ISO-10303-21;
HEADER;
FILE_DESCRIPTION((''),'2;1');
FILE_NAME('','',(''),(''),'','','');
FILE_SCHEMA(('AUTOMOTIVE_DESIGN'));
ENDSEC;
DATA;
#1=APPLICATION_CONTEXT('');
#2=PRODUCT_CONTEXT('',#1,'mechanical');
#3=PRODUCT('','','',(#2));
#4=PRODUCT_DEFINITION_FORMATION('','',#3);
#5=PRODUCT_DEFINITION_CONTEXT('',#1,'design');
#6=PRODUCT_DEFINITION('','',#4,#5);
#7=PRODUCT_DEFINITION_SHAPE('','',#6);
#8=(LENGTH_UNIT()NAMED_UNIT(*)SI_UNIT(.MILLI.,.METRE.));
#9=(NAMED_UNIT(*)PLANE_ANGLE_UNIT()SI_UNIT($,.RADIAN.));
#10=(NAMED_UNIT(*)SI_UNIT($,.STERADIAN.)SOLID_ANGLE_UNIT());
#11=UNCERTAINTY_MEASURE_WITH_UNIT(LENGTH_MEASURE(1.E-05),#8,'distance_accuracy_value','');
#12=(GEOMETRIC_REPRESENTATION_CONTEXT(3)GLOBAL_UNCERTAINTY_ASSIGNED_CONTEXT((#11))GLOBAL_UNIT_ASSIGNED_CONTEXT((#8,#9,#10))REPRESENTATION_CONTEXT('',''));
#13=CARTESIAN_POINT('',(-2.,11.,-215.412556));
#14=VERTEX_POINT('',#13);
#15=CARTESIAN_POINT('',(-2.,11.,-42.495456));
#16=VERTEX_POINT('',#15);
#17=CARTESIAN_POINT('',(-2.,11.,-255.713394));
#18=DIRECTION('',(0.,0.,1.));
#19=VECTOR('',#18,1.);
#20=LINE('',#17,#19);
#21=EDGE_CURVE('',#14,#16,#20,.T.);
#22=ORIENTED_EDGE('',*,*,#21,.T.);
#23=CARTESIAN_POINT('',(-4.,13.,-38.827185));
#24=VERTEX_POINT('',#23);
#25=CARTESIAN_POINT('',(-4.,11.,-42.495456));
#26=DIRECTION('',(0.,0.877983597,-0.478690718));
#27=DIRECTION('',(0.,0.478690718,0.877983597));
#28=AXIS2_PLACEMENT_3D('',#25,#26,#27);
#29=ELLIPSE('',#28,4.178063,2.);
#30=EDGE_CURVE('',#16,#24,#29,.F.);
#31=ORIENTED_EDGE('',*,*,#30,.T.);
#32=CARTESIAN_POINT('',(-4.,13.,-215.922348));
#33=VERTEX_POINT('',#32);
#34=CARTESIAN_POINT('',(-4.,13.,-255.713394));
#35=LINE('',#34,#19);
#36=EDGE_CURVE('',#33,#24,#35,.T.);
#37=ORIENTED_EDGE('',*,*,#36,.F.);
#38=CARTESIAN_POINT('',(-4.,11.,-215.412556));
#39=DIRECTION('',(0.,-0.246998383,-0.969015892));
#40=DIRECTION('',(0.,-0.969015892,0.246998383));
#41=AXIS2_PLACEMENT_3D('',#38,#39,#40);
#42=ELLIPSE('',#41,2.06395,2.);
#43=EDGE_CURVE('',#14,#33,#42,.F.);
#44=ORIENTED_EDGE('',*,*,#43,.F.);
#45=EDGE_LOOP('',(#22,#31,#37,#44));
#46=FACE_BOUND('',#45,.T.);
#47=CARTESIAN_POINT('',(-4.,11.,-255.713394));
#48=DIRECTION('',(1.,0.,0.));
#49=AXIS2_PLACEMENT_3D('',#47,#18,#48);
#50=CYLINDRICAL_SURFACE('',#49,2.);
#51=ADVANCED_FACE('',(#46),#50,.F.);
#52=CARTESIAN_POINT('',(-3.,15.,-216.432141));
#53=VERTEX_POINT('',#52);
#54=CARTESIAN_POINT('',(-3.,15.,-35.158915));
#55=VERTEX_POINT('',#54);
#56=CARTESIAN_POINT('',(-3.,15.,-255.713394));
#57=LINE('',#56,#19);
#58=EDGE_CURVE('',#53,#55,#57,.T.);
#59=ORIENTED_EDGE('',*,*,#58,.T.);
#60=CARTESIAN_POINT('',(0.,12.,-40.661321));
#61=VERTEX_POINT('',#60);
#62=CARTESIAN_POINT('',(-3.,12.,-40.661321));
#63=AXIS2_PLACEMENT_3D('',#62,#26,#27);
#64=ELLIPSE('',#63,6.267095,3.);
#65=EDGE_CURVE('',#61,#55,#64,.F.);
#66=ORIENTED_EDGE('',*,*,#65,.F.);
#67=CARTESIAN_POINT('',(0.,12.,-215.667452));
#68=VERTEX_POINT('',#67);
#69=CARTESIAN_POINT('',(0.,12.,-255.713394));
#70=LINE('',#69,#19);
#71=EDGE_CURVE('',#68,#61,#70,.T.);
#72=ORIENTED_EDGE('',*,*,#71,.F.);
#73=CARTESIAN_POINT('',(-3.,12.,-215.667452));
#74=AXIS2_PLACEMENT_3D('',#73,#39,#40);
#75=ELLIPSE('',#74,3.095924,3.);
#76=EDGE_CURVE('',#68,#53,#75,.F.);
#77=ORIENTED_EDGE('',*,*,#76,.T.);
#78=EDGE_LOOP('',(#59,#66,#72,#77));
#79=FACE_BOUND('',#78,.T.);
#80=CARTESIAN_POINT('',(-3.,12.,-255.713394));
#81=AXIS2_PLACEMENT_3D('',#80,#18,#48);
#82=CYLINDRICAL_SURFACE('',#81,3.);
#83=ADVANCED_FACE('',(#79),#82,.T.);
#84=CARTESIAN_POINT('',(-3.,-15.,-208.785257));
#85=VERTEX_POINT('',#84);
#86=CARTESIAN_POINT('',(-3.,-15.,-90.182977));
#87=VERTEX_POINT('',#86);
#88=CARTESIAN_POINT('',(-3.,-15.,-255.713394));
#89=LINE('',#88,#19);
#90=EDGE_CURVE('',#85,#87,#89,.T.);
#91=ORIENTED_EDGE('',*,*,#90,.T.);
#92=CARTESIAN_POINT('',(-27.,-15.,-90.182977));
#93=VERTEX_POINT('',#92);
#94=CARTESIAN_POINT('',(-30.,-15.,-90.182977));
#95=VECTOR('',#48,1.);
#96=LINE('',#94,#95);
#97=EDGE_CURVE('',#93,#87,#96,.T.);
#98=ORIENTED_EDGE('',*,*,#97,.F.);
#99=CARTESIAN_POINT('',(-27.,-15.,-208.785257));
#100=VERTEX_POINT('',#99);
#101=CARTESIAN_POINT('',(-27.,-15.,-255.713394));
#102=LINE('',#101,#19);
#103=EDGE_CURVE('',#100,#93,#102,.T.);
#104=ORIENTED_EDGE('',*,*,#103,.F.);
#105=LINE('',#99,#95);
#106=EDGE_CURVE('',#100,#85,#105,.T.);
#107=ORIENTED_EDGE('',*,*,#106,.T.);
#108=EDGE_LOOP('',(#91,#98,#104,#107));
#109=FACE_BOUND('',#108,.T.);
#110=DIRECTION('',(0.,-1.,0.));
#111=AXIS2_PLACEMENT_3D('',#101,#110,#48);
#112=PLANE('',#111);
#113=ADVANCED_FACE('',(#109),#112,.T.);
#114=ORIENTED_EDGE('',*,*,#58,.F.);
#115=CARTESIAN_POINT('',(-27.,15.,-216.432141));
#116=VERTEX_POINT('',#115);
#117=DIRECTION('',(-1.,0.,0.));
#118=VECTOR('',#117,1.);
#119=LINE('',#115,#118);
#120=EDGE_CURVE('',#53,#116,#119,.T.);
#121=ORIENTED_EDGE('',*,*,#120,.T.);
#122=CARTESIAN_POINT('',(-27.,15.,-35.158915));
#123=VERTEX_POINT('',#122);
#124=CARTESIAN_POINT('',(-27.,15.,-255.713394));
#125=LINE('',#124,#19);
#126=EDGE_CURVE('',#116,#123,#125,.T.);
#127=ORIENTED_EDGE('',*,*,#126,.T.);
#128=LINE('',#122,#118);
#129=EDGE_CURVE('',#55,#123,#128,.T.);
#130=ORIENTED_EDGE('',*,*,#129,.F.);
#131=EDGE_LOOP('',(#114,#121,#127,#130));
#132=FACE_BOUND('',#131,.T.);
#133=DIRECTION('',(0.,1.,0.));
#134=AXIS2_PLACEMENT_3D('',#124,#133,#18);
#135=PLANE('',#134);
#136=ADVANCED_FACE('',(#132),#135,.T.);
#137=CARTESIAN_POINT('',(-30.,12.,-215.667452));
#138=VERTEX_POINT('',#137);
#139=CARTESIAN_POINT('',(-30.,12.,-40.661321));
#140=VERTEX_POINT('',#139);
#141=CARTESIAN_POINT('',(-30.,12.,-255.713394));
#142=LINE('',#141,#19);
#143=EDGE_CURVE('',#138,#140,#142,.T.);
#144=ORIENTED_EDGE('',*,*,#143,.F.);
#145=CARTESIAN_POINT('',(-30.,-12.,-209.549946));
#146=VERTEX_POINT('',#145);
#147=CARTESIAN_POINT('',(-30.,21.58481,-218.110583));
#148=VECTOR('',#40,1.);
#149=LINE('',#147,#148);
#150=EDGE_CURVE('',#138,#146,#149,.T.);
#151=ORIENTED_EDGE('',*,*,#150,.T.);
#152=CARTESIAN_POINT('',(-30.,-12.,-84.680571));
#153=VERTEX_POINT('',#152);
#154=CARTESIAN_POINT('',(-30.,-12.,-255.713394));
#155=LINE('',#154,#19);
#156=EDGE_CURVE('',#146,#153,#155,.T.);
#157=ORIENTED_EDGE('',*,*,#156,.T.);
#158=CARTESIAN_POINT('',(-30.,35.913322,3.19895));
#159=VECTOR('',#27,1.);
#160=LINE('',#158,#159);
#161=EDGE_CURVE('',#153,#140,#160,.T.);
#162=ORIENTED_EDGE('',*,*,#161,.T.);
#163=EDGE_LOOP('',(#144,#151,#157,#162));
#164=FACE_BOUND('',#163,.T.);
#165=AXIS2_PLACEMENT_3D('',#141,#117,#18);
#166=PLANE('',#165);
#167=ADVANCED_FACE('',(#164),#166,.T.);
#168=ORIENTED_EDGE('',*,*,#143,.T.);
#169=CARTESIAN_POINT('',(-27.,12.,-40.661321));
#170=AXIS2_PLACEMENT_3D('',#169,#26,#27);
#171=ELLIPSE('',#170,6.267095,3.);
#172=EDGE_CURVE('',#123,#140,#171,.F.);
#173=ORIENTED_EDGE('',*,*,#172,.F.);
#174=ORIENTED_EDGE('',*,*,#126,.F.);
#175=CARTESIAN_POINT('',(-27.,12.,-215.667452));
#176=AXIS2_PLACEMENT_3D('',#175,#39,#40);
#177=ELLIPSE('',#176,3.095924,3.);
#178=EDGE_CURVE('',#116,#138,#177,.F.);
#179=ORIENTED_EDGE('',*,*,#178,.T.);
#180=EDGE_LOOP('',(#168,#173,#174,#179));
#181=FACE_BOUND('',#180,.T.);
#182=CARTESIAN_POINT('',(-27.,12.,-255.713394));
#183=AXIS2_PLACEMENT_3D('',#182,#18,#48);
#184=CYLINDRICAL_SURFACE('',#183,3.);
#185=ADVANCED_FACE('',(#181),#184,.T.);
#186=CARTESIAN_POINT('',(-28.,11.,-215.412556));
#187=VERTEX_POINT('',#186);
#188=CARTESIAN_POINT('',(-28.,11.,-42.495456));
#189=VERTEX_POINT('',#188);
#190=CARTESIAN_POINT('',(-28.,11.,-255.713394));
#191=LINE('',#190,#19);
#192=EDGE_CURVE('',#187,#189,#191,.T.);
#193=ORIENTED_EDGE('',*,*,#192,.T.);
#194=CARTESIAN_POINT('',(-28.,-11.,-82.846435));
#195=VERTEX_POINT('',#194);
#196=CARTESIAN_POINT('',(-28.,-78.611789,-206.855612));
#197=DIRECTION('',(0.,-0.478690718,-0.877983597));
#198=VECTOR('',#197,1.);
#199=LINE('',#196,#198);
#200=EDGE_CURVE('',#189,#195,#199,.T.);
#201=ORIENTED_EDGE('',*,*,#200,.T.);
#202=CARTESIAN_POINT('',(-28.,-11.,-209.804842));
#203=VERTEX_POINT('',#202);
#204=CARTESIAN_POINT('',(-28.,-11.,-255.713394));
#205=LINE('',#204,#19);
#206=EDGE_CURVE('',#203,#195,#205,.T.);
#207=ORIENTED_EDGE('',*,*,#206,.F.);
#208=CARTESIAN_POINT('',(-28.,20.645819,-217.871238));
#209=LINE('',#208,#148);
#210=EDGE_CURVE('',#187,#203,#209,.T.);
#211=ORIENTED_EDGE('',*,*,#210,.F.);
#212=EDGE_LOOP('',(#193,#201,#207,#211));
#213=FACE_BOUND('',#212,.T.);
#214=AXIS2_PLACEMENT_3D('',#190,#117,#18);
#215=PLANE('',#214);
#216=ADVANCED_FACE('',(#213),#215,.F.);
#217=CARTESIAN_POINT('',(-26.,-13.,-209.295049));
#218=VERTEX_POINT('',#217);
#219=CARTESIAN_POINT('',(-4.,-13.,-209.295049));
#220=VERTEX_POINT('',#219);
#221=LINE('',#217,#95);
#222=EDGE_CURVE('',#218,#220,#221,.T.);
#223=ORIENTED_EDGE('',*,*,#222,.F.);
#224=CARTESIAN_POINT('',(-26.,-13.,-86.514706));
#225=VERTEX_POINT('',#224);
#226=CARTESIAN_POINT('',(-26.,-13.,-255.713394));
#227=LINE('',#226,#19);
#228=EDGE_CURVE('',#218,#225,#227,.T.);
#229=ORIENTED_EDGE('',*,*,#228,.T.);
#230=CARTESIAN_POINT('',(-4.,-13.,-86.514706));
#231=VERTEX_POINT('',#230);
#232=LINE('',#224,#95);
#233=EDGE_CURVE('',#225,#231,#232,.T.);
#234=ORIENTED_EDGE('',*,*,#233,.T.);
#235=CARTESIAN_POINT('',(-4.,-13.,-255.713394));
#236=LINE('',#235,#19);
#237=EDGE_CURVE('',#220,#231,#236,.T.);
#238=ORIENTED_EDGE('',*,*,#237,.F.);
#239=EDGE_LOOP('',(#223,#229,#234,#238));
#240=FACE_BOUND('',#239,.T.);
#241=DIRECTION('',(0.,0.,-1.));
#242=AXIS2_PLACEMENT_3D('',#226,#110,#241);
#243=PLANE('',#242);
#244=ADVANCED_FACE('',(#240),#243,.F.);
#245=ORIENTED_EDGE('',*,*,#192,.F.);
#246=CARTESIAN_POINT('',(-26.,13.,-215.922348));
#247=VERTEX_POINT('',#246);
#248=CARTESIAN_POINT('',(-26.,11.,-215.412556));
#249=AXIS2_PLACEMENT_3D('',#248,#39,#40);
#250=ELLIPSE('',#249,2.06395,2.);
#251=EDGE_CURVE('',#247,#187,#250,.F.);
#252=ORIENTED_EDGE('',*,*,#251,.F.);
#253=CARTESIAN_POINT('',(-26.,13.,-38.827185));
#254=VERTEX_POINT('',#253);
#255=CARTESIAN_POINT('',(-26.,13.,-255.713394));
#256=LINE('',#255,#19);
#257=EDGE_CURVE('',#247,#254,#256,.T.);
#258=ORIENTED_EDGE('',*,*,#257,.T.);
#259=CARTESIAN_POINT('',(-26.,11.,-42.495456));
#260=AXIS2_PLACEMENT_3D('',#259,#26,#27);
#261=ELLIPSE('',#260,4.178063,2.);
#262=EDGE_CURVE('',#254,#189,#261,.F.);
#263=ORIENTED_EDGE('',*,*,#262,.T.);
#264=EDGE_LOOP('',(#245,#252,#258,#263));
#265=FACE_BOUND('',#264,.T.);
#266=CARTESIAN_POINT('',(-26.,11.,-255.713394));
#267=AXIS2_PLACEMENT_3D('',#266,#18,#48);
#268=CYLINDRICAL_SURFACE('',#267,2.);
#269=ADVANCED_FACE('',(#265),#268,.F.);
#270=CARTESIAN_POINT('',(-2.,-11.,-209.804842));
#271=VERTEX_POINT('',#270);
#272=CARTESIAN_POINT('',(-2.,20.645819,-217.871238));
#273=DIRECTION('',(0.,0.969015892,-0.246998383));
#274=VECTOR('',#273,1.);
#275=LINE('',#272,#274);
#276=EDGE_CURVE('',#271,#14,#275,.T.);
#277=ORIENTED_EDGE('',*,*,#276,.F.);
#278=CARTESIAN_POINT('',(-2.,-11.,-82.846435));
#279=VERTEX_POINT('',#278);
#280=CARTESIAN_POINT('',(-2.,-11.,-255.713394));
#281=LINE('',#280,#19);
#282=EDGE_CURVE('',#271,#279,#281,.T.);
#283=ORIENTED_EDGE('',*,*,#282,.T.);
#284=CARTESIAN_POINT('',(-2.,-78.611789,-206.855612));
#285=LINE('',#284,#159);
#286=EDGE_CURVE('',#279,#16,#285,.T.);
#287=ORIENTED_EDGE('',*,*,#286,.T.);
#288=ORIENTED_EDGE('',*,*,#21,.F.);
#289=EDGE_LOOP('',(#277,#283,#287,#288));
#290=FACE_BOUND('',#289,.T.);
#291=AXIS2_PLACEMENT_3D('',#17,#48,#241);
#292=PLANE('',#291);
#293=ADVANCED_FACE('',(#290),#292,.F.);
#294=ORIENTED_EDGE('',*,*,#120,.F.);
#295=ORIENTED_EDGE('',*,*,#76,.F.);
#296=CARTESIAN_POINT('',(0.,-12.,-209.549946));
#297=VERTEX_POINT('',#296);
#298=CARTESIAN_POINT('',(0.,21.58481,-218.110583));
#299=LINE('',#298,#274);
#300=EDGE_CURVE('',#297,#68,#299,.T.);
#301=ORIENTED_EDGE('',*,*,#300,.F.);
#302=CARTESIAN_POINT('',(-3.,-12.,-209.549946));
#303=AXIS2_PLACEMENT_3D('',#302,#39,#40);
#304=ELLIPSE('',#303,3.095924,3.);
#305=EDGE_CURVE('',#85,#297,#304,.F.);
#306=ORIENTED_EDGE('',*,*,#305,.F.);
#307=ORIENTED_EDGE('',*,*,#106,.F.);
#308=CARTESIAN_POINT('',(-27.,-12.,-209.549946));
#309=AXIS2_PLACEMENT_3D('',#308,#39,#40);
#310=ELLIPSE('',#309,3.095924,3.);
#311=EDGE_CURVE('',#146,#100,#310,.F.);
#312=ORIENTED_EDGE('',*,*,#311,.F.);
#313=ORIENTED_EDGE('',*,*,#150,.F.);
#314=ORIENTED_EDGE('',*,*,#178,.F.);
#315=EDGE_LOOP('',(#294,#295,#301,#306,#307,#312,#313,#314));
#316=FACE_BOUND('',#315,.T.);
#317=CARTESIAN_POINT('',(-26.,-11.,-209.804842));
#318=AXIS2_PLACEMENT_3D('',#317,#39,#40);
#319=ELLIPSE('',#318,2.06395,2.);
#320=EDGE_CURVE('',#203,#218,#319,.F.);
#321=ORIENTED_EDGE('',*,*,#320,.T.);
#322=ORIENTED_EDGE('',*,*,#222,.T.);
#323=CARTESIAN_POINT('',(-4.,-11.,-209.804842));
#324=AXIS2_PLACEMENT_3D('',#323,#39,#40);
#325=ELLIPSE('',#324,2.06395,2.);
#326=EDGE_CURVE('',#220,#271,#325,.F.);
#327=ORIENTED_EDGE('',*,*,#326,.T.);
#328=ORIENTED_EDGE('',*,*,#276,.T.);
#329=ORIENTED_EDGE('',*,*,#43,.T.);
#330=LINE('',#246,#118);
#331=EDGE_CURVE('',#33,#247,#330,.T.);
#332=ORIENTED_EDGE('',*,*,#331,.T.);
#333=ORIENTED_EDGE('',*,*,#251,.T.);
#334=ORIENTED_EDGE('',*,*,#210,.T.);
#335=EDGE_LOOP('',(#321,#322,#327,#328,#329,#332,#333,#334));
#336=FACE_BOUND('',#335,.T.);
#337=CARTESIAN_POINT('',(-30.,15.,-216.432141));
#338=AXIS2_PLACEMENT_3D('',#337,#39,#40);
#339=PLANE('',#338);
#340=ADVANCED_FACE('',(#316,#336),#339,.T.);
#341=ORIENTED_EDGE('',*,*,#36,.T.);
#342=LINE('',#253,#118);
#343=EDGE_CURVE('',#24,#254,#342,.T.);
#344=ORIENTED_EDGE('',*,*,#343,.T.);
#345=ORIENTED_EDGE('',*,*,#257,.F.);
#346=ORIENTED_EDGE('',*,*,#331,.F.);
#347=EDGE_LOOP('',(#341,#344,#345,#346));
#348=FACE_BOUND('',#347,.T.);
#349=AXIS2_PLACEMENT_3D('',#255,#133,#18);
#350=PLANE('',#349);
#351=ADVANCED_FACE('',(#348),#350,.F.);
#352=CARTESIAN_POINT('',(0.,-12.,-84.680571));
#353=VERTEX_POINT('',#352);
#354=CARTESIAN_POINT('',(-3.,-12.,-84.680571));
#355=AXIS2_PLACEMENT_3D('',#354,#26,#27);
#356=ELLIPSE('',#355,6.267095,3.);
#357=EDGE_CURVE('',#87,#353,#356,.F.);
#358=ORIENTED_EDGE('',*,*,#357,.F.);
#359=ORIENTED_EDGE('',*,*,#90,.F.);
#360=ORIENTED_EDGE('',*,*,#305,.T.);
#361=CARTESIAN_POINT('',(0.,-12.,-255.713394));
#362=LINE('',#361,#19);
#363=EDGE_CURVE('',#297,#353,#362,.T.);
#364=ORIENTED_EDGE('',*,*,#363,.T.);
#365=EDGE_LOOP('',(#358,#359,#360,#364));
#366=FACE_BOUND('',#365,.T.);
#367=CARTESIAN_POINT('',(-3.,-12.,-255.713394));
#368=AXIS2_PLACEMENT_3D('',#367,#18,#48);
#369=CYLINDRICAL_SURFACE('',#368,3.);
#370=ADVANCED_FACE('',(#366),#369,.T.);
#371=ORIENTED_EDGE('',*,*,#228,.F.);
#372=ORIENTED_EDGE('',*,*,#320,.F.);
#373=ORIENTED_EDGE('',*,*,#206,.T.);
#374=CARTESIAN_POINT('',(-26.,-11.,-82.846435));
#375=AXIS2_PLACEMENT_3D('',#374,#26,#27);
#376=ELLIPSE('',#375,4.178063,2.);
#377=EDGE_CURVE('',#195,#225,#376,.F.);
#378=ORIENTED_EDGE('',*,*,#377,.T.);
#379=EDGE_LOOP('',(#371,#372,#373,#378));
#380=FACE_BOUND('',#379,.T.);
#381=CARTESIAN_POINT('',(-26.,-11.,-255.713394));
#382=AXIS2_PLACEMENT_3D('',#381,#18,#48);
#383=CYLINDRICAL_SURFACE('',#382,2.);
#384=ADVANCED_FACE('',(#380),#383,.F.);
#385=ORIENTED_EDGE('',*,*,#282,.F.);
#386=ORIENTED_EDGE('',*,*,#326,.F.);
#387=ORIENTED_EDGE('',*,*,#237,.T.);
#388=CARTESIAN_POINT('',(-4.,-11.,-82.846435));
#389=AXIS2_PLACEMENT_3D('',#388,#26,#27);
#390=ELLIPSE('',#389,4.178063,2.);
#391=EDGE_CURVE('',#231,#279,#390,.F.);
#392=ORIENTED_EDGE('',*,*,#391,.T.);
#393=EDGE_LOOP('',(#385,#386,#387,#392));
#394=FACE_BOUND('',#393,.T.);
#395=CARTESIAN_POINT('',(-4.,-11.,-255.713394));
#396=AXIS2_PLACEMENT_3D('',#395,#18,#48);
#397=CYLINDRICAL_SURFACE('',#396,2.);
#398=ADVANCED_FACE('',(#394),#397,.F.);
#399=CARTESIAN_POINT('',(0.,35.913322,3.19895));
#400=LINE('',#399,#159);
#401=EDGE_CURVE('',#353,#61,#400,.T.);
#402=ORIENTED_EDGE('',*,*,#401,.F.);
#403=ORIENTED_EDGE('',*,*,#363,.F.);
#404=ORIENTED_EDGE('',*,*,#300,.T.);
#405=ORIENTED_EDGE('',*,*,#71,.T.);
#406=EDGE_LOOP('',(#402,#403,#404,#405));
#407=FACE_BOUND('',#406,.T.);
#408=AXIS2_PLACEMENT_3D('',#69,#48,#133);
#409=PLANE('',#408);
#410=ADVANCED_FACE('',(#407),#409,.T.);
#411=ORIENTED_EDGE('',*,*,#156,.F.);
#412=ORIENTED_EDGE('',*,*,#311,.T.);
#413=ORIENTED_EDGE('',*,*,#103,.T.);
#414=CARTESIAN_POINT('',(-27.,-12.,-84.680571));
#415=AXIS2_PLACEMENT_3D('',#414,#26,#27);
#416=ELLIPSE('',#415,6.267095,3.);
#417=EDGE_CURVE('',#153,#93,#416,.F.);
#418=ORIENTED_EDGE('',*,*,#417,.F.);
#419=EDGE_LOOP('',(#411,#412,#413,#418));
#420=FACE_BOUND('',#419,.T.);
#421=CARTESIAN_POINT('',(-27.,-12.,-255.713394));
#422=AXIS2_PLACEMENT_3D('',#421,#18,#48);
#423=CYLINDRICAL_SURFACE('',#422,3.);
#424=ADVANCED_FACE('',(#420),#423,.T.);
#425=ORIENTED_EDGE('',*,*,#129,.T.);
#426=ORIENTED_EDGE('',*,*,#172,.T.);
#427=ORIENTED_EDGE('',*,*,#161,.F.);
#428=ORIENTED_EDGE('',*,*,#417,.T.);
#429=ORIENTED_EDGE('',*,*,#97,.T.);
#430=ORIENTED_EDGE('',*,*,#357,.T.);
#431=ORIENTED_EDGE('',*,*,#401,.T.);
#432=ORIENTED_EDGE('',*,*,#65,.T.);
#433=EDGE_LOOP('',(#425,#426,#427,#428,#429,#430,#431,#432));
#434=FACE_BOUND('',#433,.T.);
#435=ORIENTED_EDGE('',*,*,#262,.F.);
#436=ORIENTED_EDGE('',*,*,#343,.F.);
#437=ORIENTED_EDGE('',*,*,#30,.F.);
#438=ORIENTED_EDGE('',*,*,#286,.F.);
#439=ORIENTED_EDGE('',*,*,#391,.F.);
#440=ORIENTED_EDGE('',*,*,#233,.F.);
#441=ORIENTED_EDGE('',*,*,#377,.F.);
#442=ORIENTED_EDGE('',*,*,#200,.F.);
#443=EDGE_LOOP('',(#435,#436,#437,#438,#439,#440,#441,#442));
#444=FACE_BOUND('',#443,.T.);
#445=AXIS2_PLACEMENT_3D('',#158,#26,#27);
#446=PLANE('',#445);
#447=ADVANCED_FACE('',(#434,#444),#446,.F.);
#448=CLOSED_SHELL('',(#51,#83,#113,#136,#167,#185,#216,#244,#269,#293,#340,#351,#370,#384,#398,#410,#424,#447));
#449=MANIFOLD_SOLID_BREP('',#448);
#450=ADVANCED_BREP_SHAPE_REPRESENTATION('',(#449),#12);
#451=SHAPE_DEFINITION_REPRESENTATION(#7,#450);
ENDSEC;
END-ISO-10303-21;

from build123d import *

# Parameters (mm, degrees)
EXTRUDE_START         = -216.432140614
EXTRUDE_2_DEPTH       = 216.432140614
EXTRUDE_START_2       = -214
EXTRUDE_2_2_OUTLINE_W = 32
EXTRUDE_2_2_OUTLINE_H = 33
EXTRUDE_2_2_DEPTH     = 7.978792001
CUT_EXTRUDE_1_DEPTH   = 220.015687774


with BuildPart() as part:
    # Бобышка-Вытянуть2: read off the stored shape, not the designer's step
    # Бобышка-Вытянуть2 outline → Бобышка-Вытянуть2 (new body)
    with BuildSketch(Plane.XY.offset(EXTRUDE_START)):
        with BuildLine():
            Line((-30, 12), (-30, -12))
            ThreePointArc((-30, -12), (-29.121320344, -14.121320344), (-27, -15))
            Line((-27, -15), (-3, -15))
            ThreePointArc((-3, -15), (-0.878679656, -14.121320344), (0, -12))
            Line((0, -12), (0, 12))
            ThreePointArc((0, 12), (-0.878679656, 14.121320344), (-3, 15))
            Line((-3, 15), (-27, 15))
            ThreePointArc((-27, 15), (-29.121320344, 14.121320344), (-30, 12))
        make_face()
        with BuildLine():
            ThreePointArc((-26, -13), (-27.414213562, -12.414213562), (-28, -11))
            Line((-28, -11), (-28, 11))
            ThreePointArc((-28, 11), (-27.414213562, 12.414213562), (-26, 13))
            Line((-26, 13), (-4, 13))
            ThreePointArc((-4, 13), (-2.585786438, 12.414213562), (-2, 11))
            Line((-2, 11), (-2, -11))
            ThreePointArc((-2, -11), (-2.585786438, -12.414213562), (-4, -13))
            Line((-4, -13), (-26, -13))
        make_face(mode=Mode.SUBTRACT)
    extrude(amount=EXTRUDE_2_DEPTH)

    # Extrude 2 2 outline → Extrude 2 2 (cut)
    with BuildSketch(Plane(origin=(0, 0, 0), x_dir=(1, 0, 0), z_dir=(0, 0.24699838348974407, 0.9690158917961322)).offset(EXTRUDE_START_2)):
        with Locations((-15, 52.5)):
            Rectangle(EXTRUDE_2_2_OUTLINE_W, EXTRUDE_2_2_OUTLINE_H)
    extrude(amount=EXTRUDE_2_2_DEPTH, mode=Mode.SUBTRACT)

    # Эскиз2 → Вырез-Вытянуть1 (cut, through all)
    with BuildSketch(Plane(origin=(0, 0, 0), x_dir=(0, 0, -1), z_dir=(1, 0, 0))):
        Polygon((-3.198950411, 35.913322267), (90.182976942, -15), (69.518016438, -52.902335865), (-23.863910916, -1.989013598), align=None)
    extrude(amount=-CUT_EXTRUDE_1_DEPTH, mode=Mode.SUBTRACT)


solid = part.part
